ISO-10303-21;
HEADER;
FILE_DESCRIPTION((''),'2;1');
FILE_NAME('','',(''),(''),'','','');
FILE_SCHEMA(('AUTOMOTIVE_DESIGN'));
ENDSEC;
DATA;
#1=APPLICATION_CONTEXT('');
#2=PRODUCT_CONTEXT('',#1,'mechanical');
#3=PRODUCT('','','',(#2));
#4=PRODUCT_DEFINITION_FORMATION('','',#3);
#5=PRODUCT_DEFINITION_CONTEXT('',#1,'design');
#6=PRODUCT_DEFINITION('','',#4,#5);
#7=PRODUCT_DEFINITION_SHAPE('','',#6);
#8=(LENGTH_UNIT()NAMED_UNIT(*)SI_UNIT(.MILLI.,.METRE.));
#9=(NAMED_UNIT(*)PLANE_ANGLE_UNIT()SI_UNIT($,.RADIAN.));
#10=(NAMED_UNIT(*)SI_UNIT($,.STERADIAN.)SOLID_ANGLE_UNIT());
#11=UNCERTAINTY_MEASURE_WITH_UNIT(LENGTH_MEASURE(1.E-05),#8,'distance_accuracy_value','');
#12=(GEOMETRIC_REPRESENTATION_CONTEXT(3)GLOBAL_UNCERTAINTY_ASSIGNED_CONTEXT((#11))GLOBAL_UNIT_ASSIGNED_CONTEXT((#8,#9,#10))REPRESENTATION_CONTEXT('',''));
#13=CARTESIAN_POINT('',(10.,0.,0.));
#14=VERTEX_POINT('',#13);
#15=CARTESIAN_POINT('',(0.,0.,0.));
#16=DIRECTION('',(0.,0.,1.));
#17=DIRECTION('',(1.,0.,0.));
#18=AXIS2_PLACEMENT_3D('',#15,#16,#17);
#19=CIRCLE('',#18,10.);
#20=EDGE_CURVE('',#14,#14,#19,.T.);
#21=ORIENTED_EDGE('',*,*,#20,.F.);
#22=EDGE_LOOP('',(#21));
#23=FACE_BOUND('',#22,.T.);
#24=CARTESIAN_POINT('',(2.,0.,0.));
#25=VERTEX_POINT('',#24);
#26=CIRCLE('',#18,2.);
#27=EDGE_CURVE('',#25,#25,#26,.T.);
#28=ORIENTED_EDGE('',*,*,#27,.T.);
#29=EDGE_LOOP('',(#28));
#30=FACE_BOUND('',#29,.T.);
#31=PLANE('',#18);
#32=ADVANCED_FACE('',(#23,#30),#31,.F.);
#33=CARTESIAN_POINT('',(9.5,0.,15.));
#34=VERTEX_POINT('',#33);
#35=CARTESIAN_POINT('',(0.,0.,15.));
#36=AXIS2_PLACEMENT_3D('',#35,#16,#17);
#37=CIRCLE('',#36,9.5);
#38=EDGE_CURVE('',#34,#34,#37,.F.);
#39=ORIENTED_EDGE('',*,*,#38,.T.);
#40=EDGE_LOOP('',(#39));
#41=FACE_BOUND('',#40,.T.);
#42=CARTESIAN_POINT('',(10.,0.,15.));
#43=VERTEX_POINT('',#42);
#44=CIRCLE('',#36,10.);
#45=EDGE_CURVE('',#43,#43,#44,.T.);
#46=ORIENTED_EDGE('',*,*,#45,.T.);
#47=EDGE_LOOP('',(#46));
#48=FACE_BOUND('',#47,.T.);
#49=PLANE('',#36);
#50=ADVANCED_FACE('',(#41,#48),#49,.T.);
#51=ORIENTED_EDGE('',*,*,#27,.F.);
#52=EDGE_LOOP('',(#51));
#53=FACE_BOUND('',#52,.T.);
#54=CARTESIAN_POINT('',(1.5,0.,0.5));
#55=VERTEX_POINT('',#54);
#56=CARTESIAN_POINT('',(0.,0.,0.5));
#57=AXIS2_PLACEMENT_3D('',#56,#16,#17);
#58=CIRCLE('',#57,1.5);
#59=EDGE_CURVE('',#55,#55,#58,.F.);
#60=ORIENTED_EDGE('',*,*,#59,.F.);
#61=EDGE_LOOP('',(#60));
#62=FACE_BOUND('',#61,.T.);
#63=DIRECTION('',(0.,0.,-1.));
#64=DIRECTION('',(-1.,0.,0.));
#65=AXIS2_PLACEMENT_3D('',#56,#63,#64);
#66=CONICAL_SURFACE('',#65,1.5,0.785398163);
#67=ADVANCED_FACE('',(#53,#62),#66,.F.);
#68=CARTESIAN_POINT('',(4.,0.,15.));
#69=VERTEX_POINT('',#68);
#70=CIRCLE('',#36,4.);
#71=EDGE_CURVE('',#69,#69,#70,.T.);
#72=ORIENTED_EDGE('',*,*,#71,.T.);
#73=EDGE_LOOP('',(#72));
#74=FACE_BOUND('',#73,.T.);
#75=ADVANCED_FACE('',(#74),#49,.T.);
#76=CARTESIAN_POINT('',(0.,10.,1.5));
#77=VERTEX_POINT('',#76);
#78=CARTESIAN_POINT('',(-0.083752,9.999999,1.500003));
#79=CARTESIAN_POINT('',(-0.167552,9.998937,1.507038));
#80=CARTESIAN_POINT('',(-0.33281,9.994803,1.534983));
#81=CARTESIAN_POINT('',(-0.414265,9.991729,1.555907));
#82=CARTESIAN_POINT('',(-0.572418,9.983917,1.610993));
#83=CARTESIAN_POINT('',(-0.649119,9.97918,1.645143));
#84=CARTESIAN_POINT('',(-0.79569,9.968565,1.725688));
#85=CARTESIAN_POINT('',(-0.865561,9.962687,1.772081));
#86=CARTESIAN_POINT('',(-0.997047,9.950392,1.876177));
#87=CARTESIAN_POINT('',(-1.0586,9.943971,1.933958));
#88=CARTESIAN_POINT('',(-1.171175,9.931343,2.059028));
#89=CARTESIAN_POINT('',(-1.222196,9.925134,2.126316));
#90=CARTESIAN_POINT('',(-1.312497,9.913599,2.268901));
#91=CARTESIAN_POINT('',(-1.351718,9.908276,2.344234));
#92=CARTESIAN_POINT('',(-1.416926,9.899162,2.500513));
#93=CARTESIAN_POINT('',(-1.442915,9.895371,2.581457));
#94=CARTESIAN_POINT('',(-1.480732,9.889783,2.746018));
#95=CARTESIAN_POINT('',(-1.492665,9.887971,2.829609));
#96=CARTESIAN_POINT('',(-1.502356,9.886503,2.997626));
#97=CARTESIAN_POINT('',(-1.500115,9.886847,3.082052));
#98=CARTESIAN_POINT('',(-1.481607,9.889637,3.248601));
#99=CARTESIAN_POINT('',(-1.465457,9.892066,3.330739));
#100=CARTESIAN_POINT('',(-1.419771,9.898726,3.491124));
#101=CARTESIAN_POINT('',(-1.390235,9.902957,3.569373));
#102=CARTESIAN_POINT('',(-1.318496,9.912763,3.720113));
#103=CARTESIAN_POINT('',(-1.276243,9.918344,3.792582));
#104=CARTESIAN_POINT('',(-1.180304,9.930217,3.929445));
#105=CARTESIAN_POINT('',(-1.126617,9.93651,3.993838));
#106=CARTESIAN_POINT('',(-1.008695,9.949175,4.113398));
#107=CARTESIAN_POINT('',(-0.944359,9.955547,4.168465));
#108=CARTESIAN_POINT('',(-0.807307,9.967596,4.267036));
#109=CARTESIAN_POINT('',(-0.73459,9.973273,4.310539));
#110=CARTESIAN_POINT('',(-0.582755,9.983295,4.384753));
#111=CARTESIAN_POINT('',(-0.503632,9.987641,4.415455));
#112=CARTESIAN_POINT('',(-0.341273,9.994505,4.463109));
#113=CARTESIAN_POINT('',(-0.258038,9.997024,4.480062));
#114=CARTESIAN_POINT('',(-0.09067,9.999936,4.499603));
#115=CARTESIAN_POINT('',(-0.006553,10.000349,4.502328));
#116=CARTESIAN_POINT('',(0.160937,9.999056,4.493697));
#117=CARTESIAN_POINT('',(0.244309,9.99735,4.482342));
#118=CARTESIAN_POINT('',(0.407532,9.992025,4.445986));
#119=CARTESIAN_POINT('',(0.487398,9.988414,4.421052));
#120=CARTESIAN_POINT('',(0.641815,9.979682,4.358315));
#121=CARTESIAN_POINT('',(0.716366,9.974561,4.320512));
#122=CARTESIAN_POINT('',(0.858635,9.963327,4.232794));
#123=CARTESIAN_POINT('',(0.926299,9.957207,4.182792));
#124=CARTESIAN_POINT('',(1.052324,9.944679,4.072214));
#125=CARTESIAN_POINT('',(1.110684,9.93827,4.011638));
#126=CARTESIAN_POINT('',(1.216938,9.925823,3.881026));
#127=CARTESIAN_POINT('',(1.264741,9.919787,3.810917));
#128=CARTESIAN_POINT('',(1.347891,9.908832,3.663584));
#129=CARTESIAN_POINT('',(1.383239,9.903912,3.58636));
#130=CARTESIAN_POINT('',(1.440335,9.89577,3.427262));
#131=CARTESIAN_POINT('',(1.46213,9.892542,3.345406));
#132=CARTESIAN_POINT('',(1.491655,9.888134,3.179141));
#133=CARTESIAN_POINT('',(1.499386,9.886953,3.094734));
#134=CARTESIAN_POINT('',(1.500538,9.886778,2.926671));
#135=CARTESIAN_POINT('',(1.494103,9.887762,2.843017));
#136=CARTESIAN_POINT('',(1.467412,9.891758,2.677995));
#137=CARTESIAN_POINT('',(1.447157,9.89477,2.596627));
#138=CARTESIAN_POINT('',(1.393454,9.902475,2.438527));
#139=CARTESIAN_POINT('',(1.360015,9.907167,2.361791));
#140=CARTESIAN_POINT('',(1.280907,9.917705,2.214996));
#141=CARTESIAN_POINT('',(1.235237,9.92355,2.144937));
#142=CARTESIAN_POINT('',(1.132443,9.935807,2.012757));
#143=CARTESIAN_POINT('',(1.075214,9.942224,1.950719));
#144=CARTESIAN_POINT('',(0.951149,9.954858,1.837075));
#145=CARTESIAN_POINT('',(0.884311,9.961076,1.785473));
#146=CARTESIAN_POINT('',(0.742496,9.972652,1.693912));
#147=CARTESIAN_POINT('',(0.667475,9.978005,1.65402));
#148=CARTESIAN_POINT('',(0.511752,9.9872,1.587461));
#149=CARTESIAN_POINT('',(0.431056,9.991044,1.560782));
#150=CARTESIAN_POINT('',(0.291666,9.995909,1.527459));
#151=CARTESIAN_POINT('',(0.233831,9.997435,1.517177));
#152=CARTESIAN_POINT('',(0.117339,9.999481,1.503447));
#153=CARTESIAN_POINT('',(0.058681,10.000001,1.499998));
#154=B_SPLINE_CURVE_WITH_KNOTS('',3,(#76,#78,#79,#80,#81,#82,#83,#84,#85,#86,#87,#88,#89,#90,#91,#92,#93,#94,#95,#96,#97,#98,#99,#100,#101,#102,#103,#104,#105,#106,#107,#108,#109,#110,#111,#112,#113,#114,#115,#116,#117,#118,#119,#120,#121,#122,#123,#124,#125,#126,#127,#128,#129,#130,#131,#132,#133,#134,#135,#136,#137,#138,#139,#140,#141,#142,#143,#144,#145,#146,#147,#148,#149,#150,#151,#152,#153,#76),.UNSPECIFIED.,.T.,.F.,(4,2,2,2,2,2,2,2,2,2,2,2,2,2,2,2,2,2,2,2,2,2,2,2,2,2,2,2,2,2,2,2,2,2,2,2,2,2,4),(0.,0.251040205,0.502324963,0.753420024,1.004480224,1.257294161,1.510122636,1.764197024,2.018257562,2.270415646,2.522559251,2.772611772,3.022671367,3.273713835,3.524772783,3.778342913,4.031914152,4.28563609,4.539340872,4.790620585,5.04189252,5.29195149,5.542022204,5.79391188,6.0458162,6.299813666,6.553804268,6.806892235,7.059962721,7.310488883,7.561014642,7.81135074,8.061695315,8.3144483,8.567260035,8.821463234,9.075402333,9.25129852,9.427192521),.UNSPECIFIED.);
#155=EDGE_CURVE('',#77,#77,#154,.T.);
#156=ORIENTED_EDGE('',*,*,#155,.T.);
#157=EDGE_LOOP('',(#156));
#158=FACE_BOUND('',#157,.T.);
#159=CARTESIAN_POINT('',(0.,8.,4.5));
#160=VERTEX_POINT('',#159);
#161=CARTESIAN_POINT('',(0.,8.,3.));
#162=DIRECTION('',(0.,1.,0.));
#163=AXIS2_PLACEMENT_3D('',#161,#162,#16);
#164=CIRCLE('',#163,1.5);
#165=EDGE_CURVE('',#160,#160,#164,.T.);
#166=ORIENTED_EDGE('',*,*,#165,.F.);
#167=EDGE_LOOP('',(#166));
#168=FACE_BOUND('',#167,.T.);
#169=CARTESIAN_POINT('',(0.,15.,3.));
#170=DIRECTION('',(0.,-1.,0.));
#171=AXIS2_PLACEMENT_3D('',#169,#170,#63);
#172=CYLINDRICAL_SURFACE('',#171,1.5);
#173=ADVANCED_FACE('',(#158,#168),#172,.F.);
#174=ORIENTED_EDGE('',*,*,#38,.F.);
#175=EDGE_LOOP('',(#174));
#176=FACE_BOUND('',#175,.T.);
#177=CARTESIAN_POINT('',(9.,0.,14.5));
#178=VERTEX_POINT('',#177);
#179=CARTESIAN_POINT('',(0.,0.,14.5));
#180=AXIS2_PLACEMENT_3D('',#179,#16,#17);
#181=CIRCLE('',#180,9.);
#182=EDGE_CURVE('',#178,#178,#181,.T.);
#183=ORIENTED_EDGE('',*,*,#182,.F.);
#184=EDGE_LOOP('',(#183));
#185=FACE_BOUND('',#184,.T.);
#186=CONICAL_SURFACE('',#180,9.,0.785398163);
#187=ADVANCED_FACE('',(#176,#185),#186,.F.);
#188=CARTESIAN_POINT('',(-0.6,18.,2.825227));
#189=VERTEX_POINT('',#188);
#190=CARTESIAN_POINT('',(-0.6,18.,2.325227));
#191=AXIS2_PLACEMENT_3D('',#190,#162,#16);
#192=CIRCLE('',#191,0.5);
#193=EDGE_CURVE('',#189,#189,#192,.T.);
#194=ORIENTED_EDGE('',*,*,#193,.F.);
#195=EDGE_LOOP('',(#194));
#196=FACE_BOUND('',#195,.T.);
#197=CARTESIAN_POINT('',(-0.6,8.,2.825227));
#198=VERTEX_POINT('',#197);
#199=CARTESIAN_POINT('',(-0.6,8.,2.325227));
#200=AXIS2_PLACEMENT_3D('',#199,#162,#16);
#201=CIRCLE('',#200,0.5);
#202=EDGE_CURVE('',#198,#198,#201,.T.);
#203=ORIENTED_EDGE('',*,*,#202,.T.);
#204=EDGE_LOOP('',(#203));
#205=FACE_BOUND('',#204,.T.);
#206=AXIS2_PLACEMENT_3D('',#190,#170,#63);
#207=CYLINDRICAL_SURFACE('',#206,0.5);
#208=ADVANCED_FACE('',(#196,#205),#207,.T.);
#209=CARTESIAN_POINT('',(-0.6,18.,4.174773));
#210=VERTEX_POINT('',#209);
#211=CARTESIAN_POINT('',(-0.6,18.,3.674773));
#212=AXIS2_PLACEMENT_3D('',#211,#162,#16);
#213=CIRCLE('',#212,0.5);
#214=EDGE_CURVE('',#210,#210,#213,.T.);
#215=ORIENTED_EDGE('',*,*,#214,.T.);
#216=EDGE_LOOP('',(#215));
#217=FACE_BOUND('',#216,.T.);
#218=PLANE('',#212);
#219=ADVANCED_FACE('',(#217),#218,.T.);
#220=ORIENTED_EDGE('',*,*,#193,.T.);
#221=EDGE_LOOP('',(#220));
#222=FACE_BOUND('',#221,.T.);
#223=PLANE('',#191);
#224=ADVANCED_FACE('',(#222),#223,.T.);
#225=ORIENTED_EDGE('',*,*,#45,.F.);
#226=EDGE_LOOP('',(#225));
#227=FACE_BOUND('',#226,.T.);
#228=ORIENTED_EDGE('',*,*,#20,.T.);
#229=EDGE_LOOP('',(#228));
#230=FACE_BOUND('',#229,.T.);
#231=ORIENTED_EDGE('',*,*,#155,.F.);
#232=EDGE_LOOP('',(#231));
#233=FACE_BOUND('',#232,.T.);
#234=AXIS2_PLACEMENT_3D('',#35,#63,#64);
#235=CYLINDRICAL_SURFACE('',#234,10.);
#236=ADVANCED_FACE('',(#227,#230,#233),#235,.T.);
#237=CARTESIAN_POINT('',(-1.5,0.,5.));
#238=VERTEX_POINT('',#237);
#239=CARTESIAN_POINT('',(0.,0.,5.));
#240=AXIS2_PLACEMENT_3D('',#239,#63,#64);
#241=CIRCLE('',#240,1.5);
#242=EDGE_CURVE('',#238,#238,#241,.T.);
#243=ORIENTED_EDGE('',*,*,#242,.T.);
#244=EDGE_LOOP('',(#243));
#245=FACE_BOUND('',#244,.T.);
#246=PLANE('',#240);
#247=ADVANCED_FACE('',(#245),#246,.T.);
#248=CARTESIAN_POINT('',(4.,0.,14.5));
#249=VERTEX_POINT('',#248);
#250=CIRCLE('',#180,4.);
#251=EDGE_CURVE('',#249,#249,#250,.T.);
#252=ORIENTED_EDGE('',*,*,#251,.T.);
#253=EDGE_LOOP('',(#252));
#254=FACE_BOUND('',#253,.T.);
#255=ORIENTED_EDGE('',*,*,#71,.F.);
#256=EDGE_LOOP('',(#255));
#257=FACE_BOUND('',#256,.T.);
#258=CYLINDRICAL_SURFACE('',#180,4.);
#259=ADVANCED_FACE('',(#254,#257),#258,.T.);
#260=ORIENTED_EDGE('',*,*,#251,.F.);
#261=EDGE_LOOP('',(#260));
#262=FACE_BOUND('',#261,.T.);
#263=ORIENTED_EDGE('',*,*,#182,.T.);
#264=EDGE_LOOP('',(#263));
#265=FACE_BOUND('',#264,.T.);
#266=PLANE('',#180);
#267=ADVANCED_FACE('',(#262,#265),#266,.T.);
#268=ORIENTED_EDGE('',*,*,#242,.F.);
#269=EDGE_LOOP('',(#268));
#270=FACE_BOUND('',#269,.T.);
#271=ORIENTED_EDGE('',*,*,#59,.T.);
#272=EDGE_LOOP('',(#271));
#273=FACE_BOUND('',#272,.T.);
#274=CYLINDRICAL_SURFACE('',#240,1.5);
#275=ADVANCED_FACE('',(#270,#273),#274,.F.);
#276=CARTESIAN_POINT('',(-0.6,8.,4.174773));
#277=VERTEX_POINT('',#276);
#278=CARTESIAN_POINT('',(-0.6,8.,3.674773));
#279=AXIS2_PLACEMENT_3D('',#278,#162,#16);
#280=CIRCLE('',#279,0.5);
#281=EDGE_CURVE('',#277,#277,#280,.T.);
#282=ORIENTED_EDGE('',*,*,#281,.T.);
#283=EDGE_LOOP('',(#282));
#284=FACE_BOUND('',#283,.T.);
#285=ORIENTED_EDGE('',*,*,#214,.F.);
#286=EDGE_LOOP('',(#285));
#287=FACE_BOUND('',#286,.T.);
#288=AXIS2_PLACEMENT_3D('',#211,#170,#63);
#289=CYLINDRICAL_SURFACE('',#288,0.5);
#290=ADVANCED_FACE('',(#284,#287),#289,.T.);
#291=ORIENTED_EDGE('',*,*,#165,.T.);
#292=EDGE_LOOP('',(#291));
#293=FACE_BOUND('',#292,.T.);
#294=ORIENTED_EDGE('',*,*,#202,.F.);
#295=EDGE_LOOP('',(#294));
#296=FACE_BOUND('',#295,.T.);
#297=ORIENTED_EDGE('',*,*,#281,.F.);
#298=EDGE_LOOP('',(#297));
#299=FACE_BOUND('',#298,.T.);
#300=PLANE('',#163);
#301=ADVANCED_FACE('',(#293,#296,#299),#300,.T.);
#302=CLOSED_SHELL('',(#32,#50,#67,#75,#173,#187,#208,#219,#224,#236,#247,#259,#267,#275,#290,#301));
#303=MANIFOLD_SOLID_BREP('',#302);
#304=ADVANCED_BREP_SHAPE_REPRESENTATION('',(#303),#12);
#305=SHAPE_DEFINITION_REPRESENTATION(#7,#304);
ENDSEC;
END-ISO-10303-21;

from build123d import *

# Parameters (mm, degrees)
SKETCH_1_R          = 10
EXTRUDE_1_DEPTH     = 15
SKETCH_2_R          = 9
SKETCH_2_R_2        = 4
CUT_EXTRUDE_2_DEPTH = 0.5
CHAMFER_1_SIZE      = 0.5
SKETCH_3_R          = 1.5
CUT_EXTRUDE_3_DEPTH = 5
CHAMFER_2_SIZE      = 0.5
SKETCH_4_R          = 1.5
CUT_EXTRUDE_4_DEPTH = 7
SKETCH_5_R          = 0.5
EXTRUDE_2_DEPTH     = 10


with BuildPart() as part:
    # 草图1 → 凸台-拉伸1 (new body)
    with BuildSketch(Plane.XY):
        Circle(SKETCH_1_R)
    extrude(amount=EXTRUDE_1_DEPTH)

    # 草图2 → 切除-拉伸2 (cut)
    with BuildSketch(Plane.XY.offset(15)):
        Circle(SKETCH_2_R)
        Circle(SKETCH_2_R_2, mode=Mode.SUBTRACT)
    extrude(amount=-CUT_EXTRUDE_2_DEPTH, mode=Mode.SUBTRACT)

    # 倒角1
    chamfer_1_edges = [part.edges().sort_by_distance(p)[0] for p in [
        (-9, 0, 15),
    ]]
    chamfer(chamfer_1_edges, length=CHAMFER_1_SIZE - 0.0001)  # a hair under: the kernel refuses the full size

    # 草图3 → 切除-拉伸3 (cut)
    with BuildSketch(Plane(origin=(0, 0, 0), x_dir=(-1, 0, 0), z_dir=(0, 0, -1))):
        Circle(SKETCH_3_R)
    extrude(amount=-CUT_EXTRUDE_3_DEPTH, mode=Mode.SUBTRACT)

    # 倒角2
    chamfer_2_edges = [part.edges().sort_by_distance(p)[0] for p in [
        (1.5, 0, 0),
    ]]
    chamfer(chamfer_2_edges, length=CHAMFER_2_SIZE)

    # 草图4 → 切除-拉伸4 (cut)
    with BuildSketch(Plane(origin=(0, 8, 0), x_dir=(1, 0, 0), z_dir=(0, 1, 0))):
        with Locations(Location((0, -3, 0), (0, 0, 90))):
            Circle(SKETCH_4_R)
    extrude(amount=CUT_EXTRUDE_4_DEPTH, mode=Mode.SUBTRACT)

    # 草图5 → 凸台-拉伸2 (add)
    with BuildSketch(Plane(origin=(0, 8, 0), x_dir=(1, 0, 0), z_dir=(0, 1, 0))):
        with Locations(Location((-0.6, -2.325227292, 0), (0, 0, 270))):
            Circle(SKETCH_5_R)
        with Locations(Location((-0.6, -3.674772708, 0), (0, 0, 270))):
            Circle(SKETCH_5_R)
    extrude(amount=EXTRUDE_2_DEPTH)


solid = part.part
